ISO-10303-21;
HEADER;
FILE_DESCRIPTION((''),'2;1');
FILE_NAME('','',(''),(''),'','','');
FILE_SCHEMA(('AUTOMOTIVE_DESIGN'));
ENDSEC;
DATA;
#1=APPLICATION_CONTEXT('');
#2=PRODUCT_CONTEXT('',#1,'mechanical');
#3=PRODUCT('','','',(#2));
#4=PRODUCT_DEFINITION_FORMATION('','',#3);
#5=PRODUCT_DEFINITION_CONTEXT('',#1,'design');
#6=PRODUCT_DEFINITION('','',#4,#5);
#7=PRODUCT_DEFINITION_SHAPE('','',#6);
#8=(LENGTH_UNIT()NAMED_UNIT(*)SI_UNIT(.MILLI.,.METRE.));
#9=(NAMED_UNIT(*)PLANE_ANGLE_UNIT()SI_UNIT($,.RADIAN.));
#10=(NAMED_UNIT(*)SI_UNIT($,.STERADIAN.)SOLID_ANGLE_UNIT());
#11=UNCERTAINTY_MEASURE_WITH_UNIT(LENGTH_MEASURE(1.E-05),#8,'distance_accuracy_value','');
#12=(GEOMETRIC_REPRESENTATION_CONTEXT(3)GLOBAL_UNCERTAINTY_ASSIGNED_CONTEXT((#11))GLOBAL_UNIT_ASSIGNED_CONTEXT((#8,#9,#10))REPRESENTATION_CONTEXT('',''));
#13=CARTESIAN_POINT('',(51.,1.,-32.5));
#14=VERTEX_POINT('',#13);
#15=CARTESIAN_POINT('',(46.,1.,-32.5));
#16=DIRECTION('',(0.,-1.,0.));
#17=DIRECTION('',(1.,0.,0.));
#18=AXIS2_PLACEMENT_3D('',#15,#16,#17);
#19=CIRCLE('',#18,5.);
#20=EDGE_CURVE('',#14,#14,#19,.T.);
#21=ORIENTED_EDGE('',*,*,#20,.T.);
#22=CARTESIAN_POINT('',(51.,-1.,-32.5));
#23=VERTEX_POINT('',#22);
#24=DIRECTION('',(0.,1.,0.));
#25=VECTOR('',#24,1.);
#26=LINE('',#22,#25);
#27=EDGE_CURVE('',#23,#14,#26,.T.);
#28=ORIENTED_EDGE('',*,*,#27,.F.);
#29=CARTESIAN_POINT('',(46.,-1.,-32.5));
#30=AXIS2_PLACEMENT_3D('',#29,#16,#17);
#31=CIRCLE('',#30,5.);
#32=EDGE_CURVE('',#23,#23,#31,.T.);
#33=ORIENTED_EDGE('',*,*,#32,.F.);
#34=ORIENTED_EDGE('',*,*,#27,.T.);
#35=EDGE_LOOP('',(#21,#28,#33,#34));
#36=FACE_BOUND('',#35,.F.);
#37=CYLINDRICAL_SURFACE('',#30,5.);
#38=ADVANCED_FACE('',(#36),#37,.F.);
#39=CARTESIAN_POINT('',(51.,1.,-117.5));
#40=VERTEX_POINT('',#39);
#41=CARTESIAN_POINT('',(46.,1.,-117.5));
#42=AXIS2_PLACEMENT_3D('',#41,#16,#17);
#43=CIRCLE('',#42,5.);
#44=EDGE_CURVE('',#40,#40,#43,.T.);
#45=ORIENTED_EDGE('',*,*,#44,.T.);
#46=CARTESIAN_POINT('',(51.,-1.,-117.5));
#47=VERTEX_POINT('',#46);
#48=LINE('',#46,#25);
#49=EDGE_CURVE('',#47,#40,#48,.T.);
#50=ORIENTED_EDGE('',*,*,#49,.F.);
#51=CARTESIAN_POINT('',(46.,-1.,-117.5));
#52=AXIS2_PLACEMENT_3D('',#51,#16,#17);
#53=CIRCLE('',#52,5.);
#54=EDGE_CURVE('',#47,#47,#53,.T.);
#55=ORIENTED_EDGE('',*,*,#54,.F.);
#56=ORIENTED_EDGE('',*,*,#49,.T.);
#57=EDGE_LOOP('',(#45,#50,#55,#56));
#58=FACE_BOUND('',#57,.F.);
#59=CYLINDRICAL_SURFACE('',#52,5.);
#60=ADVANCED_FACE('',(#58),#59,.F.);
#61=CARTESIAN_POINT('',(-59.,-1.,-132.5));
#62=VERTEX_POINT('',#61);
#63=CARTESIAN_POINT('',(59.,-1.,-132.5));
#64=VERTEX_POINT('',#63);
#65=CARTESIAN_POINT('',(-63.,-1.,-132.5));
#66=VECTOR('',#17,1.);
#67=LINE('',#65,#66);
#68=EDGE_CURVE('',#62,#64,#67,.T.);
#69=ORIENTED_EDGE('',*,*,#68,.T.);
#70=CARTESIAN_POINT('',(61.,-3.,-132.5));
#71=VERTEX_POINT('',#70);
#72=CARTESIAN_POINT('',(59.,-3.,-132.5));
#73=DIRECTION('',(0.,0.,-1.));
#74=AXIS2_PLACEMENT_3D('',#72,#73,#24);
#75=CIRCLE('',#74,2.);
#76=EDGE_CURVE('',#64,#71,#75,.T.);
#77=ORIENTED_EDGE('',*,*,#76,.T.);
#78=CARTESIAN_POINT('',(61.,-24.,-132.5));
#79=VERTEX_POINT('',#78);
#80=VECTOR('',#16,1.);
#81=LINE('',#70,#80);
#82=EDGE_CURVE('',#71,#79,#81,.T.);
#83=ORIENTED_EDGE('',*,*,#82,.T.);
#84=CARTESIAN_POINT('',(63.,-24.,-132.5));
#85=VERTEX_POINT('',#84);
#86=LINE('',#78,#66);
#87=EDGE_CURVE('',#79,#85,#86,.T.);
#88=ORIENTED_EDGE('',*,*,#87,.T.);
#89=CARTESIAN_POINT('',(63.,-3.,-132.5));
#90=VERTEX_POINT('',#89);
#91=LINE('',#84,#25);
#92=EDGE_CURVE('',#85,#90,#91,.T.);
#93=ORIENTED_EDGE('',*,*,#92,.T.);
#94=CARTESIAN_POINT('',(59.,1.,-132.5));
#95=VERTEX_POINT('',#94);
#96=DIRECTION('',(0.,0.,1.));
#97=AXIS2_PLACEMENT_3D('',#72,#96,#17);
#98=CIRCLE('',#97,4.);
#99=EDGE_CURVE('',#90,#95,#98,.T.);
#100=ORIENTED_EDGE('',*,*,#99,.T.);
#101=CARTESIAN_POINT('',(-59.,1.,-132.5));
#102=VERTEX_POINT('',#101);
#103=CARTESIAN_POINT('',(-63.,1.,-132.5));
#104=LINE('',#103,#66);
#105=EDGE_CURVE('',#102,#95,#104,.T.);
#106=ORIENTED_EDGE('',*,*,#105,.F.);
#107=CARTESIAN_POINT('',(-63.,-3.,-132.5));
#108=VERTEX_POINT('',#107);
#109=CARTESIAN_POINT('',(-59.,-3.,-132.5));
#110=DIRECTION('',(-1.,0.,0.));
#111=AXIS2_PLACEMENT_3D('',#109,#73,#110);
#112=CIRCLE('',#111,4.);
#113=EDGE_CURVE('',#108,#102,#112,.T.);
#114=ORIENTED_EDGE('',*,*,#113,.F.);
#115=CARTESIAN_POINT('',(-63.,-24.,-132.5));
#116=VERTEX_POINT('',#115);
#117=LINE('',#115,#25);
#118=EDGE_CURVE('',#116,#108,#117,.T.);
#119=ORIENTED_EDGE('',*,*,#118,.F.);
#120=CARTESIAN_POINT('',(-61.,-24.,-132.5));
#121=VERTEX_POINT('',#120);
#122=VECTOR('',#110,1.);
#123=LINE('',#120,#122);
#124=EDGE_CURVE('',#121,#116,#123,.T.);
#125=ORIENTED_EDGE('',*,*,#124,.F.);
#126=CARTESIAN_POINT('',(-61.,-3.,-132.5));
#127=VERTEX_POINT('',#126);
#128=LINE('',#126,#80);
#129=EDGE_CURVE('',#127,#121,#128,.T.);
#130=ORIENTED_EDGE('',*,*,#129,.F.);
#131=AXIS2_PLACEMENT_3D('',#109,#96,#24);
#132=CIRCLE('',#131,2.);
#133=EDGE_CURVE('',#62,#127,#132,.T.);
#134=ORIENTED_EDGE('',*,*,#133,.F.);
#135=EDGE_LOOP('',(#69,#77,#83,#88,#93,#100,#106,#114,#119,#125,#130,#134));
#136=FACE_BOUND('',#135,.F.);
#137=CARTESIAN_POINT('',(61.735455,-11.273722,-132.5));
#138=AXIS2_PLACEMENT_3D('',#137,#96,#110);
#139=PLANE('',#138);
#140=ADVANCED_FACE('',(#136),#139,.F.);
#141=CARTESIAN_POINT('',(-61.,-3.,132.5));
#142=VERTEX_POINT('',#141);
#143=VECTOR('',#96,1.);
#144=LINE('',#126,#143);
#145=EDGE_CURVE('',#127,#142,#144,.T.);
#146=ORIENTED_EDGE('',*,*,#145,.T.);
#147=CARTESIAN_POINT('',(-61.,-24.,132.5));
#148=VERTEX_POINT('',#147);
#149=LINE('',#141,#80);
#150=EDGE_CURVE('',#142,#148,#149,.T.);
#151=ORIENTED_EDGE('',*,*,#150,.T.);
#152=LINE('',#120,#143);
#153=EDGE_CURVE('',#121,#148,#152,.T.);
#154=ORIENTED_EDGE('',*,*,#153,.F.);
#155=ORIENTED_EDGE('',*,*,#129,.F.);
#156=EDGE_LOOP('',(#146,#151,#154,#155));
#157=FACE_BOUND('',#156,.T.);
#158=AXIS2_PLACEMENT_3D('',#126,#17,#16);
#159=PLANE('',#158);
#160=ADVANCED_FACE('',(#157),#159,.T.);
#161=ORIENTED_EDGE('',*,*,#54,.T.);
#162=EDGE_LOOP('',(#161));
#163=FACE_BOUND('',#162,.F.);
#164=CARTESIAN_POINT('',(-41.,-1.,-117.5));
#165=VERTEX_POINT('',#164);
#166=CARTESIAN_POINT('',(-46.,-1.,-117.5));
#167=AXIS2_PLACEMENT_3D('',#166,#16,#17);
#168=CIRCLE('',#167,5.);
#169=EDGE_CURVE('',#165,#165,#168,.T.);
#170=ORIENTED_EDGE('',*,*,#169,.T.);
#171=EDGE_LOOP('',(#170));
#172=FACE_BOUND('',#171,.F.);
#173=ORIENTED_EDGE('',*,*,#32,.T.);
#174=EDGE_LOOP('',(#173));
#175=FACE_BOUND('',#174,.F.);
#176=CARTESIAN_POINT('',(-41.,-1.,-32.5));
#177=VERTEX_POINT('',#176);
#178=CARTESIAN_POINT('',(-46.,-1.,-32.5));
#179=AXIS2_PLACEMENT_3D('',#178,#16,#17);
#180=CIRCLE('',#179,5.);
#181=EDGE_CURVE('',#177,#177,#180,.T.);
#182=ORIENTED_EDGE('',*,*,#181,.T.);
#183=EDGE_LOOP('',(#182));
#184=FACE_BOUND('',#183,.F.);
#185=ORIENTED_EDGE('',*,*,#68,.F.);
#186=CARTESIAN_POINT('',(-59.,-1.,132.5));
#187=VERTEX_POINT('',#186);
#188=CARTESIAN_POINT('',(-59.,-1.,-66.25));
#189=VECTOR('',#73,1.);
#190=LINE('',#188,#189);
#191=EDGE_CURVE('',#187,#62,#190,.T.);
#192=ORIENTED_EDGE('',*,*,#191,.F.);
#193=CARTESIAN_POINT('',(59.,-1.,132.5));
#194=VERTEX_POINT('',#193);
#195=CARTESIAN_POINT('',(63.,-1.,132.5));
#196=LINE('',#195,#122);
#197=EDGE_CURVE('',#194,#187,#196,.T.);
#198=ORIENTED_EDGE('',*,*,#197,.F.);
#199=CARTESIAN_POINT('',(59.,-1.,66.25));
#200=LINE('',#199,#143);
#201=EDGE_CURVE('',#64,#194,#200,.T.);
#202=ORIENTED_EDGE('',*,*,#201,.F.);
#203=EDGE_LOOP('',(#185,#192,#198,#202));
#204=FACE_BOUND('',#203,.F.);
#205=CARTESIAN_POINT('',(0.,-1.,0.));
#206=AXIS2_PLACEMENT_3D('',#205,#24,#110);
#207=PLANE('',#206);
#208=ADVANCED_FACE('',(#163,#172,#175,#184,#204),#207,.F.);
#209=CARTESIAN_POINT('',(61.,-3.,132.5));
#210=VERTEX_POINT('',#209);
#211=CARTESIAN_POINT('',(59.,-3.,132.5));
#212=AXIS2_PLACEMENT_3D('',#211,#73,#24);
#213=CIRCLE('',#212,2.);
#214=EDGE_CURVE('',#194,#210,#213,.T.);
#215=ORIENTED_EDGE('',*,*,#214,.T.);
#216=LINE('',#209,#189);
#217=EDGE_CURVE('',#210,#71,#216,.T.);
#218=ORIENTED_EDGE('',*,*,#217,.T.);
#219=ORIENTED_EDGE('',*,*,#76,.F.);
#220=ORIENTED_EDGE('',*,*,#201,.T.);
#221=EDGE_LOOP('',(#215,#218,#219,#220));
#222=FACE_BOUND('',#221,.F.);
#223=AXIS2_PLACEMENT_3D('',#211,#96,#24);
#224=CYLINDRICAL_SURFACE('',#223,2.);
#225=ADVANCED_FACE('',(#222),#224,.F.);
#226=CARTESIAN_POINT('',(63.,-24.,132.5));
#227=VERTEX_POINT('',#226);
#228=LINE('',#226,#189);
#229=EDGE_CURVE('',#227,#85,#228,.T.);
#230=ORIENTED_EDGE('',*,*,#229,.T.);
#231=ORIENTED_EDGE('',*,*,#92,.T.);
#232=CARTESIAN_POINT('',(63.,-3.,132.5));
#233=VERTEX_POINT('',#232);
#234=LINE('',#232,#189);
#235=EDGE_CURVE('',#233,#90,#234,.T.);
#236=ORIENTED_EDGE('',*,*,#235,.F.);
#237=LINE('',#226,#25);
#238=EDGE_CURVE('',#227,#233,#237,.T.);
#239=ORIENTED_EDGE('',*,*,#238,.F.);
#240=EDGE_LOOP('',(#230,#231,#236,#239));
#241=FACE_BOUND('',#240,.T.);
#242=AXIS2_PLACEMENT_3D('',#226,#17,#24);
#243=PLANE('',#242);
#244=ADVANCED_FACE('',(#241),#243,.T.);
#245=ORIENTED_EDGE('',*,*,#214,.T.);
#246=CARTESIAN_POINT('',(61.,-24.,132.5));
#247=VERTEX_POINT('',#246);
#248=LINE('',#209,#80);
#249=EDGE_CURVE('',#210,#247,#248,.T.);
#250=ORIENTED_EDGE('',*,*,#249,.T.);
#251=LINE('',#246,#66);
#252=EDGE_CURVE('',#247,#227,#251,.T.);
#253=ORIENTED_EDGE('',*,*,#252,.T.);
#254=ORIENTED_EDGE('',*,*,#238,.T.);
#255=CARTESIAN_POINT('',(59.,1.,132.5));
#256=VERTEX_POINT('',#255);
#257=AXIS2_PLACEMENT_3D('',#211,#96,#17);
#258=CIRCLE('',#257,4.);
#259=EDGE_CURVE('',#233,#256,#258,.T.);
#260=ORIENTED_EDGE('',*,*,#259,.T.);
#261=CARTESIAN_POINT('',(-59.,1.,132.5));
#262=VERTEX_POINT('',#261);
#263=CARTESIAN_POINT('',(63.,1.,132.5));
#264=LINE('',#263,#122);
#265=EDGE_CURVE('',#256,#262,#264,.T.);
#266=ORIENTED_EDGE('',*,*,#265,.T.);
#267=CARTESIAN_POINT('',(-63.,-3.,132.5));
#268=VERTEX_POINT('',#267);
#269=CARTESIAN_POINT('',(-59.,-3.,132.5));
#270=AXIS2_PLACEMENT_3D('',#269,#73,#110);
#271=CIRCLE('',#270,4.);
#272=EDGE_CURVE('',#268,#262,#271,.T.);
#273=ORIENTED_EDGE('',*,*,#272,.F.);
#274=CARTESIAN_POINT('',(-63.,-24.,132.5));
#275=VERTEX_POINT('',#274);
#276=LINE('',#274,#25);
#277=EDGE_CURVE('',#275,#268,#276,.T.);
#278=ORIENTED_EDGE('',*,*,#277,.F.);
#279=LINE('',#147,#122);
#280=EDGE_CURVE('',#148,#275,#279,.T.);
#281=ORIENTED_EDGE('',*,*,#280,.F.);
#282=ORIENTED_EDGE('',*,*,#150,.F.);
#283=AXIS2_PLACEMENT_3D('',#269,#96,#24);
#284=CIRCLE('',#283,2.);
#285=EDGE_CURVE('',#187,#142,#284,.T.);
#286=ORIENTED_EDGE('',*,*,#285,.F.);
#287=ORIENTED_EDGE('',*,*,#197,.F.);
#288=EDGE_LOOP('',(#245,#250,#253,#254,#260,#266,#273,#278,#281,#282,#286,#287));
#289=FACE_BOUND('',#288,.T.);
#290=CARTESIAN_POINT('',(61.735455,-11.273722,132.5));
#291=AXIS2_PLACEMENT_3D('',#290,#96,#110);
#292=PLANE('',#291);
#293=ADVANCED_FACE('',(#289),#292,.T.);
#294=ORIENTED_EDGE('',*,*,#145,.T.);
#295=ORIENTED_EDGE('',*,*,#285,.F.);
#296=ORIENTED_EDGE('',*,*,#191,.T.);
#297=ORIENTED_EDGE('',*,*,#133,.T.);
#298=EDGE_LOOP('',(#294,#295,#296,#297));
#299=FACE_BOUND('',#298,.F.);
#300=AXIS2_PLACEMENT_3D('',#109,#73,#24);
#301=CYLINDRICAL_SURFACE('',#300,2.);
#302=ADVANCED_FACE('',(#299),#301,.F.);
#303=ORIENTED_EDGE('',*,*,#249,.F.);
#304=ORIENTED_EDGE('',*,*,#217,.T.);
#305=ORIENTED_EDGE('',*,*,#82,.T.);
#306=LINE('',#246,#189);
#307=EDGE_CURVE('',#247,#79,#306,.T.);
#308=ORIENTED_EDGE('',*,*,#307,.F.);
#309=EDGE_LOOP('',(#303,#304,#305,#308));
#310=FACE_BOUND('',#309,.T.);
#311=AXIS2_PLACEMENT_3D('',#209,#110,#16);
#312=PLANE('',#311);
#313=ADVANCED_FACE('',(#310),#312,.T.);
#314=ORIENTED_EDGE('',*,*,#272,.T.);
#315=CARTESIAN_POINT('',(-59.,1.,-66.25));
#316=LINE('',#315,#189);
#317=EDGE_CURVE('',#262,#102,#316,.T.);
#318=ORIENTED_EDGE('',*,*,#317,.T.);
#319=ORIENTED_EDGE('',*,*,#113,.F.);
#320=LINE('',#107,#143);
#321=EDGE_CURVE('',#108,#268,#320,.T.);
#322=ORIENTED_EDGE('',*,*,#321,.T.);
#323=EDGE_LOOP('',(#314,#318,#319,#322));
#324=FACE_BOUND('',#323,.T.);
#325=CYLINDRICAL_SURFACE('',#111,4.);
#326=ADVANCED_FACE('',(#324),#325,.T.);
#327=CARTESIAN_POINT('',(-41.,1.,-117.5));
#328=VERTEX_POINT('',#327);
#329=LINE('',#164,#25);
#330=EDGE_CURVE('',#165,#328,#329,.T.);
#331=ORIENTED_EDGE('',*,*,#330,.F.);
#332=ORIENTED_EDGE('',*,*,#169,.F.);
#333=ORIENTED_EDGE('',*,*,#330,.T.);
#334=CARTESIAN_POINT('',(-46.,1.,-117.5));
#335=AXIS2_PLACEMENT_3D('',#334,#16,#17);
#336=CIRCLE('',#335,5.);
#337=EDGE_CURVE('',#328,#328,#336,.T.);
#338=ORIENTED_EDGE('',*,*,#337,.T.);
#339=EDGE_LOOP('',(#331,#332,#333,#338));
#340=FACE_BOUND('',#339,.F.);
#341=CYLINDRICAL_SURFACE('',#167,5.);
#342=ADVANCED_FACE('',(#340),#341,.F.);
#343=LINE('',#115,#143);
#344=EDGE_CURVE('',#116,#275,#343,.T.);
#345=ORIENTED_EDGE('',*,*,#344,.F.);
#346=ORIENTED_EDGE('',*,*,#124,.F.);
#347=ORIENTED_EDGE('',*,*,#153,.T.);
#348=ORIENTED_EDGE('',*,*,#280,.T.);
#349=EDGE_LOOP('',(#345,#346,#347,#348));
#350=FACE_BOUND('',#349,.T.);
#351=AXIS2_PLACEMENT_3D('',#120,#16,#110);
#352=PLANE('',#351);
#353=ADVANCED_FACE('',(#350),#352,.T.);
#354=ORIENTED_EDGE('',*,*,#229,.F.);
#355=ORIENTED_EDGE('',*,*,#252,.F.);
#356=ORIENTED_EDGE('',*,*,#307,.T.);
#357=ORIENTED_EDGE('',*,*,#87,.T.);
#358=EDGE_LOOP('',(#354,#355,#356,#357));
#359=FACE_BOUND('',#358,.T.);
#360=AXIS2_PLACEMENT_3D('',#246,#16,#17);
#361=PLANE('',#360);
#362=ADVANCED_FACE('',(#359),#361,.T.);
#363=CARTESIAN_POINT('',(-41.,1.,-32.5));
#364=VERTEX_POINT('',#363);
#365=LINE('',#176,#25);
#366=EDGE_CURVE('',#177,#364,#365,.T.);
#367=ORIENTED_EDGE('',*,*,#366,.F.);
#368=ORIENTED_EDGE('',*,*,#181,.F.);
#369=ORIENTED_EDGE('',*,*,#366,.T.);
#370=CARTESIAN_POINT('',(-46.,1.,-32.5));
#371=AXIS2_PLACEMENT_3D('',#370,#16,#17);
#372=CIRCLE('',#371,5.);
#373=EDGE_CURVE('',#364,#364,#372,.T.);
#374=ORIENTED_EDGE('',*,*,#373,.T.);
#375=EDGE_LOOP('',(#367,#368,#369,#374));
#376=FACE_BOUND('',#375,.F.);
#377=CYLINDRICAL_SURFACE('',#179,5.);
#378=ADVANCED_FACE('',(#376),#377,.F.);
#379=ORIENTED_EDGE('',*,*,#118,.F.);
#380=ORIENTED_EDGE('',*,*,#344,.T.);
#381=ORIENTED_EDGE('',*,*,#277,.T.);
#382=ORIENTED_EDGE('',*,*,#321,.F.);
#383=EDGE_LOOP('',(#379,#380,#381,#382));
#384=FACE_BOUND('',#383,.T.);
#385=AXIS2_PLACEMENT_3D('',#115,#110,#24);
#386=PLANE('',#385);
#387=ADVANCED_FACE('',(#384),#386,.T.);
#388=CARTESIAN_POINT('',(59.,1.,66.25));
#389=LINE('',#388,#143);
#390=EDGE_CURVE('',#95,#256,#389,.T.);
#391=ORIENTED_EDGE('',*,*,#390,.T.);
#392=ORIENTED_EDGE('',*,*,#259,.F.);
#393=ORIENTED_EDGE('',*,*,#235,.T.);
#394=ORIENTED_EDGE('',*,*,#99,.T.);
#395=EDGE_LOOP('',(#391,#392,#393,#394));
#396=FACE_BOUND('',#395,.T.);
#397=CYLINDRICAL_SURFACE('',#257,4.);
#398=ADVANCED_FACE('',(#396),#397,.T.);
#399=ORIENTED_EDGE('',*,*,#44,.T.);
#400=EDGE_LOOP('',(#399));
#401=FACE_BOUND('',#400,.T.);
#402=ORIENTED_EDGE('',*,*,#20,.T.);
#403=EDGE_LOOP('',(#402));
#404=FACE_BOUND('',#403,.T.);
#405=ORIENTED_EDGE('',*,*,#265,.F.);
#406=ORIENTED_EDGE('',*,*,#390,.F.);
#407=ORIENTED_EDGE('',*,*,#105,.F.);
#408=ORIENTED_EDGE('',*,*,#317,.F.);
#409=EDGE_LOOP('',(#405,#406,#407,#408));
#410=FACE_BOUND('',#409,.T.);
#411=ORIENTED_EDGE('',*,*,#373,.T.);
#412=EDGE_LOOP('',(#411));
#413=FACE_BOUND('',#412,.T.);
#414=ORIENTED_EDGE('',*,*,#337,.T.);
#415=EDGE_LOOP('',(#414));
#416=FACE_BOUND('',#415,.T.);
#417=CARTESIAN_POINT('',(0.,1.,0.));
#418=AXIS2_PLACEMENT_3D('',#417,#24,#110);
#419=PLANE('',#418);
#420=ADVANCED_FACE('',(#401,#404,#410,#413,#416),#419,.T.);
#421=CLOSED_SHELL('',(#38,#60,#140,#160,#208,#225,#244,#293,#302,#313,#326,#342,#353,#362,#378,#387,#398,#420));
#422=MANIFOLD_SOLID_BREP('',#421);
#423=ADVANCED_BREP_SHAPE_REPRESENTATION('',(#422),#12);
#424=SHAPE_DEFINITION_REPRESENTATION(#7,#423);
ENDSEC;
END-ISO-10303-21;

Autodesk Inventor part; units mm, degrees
ref_plane "YZ Plane" through (0, 0, 0) normal (1, 0, 0) x (0, 1, 0)
ref_plane "XZ Plane" through (0, 0, 0) normal (0, 1, 0) x (-1, 0, 0)
ref_plane "XY Plane" through (0, 0, 0) normal (0, 0, 1) x (1, 0, 0)
sketch "Sketch4" plane through (0, 0, 0) normal (0, 1, 0) x (-1, 0, 0)
  line L0 (63, -132.5) -> (-63, -132.5)
  line L1 (-63, -132.5) -> (-63, 132.5)
  line L2 (-63, 132.5) -> (63, 132.5)
  line L3 (63, 132.5) -> (63, -132.5)
  line L4 (63, -132.5) -> (-63, 132.5) construction
  point P0 (0, 0)
  point P1 (0, 0)
  dimension "d24" = 126
  dimension "d25" = 265
extrude "Plate4" add sketch "Sketch4" along normal mid plane 2
sketch "Sketch7" plane through (0, -1, 0) normal (0, -1, 0) x (1, 0, 0)
  circle A0 centre (46, -117.5) radius 5
  line L0 (63, 132.5) -> (63, -132.5) projected
  line L1 (63, -132.5) -> (-63, -132.5) projected
  line L2 (0, -74.3103) -> (0, 74.3103) construction
  line L3 (114.9724, 0) -> (-114.9724, 0) construction
  circle A1 centre (-46, -117.5) radius 5
  circle A2 centre (46, -32.5) radius 5
  circle A3 centre (-46, -32.5) radius 5
  point P0 (0, 0)
  point P1 (0, 0)
  dimension "d41" = 10
  dimension "d42" = 17
  dimension "d43" = 15
  dimension "d46" = 85
extrude "Extrusion2" cut sketch "Sketch7" against normal up to surface (2 mm away)
sketch "Sketch8" plane through (61, 1, 132.5) normal (1, 0, 0) x (0, 1, 0)
  line L0 (0, -265) -> (0, 0)
  line L1 (0, 0) -> (-25, 0)
  line L2 (-25, 0) -> (-25, -265)
  line L3 (-25, -265) -> (0, -265)
edge flange "Flange4" height 25 angle 90 thickness 2 bend radius 2 thickness toward (1, 0, 0) relief tear relief width 2 relief depth 1 corner gap 2 corner form 0 edges at (63, -1, 0) (-63, -1, 0) wall of the first edge with corners at (61, 1, -132.5) (61, 1, 132.5) (61, -24, 132.5) (61, -24, -132.5)
bend "Bend4"
corner "Corner4"
equation "\"d26\" = Thickness"
equation "\"d47\" = BendReliefWidth"
equation "\"d48\" = BendReliefDepth"
equation "\"d49\" = MinimumRemnant"
equation "\"d50\" = TransitionRadius"
equation "\"d53\" = BendRadius"
equation "\"d54\" = CornerReliefSize"
equation "\"d55\" = GapSize"
equation "\"d56\" = JacobiRadiusSize"
equation "\"BendRadius\" = Thickness"
equation "\"BendReliefWidth\" = Thickness"
equation "\"BendReliefDepth\" = 0.5 * Thickness"
equation "\"CornerReliefSize\" = 4 * Thickness"
equation "\"MinimumRemnant\" = 2 * Thickness"
equation "\"TransitionRadius\" = BendRadius"
equation "\"JacobiRadiusSize\" = BendRadius"
equation "\"GapSize\" = Thickness"
equation "\"Thickness\" = 2"
properties part number "Крепление"
